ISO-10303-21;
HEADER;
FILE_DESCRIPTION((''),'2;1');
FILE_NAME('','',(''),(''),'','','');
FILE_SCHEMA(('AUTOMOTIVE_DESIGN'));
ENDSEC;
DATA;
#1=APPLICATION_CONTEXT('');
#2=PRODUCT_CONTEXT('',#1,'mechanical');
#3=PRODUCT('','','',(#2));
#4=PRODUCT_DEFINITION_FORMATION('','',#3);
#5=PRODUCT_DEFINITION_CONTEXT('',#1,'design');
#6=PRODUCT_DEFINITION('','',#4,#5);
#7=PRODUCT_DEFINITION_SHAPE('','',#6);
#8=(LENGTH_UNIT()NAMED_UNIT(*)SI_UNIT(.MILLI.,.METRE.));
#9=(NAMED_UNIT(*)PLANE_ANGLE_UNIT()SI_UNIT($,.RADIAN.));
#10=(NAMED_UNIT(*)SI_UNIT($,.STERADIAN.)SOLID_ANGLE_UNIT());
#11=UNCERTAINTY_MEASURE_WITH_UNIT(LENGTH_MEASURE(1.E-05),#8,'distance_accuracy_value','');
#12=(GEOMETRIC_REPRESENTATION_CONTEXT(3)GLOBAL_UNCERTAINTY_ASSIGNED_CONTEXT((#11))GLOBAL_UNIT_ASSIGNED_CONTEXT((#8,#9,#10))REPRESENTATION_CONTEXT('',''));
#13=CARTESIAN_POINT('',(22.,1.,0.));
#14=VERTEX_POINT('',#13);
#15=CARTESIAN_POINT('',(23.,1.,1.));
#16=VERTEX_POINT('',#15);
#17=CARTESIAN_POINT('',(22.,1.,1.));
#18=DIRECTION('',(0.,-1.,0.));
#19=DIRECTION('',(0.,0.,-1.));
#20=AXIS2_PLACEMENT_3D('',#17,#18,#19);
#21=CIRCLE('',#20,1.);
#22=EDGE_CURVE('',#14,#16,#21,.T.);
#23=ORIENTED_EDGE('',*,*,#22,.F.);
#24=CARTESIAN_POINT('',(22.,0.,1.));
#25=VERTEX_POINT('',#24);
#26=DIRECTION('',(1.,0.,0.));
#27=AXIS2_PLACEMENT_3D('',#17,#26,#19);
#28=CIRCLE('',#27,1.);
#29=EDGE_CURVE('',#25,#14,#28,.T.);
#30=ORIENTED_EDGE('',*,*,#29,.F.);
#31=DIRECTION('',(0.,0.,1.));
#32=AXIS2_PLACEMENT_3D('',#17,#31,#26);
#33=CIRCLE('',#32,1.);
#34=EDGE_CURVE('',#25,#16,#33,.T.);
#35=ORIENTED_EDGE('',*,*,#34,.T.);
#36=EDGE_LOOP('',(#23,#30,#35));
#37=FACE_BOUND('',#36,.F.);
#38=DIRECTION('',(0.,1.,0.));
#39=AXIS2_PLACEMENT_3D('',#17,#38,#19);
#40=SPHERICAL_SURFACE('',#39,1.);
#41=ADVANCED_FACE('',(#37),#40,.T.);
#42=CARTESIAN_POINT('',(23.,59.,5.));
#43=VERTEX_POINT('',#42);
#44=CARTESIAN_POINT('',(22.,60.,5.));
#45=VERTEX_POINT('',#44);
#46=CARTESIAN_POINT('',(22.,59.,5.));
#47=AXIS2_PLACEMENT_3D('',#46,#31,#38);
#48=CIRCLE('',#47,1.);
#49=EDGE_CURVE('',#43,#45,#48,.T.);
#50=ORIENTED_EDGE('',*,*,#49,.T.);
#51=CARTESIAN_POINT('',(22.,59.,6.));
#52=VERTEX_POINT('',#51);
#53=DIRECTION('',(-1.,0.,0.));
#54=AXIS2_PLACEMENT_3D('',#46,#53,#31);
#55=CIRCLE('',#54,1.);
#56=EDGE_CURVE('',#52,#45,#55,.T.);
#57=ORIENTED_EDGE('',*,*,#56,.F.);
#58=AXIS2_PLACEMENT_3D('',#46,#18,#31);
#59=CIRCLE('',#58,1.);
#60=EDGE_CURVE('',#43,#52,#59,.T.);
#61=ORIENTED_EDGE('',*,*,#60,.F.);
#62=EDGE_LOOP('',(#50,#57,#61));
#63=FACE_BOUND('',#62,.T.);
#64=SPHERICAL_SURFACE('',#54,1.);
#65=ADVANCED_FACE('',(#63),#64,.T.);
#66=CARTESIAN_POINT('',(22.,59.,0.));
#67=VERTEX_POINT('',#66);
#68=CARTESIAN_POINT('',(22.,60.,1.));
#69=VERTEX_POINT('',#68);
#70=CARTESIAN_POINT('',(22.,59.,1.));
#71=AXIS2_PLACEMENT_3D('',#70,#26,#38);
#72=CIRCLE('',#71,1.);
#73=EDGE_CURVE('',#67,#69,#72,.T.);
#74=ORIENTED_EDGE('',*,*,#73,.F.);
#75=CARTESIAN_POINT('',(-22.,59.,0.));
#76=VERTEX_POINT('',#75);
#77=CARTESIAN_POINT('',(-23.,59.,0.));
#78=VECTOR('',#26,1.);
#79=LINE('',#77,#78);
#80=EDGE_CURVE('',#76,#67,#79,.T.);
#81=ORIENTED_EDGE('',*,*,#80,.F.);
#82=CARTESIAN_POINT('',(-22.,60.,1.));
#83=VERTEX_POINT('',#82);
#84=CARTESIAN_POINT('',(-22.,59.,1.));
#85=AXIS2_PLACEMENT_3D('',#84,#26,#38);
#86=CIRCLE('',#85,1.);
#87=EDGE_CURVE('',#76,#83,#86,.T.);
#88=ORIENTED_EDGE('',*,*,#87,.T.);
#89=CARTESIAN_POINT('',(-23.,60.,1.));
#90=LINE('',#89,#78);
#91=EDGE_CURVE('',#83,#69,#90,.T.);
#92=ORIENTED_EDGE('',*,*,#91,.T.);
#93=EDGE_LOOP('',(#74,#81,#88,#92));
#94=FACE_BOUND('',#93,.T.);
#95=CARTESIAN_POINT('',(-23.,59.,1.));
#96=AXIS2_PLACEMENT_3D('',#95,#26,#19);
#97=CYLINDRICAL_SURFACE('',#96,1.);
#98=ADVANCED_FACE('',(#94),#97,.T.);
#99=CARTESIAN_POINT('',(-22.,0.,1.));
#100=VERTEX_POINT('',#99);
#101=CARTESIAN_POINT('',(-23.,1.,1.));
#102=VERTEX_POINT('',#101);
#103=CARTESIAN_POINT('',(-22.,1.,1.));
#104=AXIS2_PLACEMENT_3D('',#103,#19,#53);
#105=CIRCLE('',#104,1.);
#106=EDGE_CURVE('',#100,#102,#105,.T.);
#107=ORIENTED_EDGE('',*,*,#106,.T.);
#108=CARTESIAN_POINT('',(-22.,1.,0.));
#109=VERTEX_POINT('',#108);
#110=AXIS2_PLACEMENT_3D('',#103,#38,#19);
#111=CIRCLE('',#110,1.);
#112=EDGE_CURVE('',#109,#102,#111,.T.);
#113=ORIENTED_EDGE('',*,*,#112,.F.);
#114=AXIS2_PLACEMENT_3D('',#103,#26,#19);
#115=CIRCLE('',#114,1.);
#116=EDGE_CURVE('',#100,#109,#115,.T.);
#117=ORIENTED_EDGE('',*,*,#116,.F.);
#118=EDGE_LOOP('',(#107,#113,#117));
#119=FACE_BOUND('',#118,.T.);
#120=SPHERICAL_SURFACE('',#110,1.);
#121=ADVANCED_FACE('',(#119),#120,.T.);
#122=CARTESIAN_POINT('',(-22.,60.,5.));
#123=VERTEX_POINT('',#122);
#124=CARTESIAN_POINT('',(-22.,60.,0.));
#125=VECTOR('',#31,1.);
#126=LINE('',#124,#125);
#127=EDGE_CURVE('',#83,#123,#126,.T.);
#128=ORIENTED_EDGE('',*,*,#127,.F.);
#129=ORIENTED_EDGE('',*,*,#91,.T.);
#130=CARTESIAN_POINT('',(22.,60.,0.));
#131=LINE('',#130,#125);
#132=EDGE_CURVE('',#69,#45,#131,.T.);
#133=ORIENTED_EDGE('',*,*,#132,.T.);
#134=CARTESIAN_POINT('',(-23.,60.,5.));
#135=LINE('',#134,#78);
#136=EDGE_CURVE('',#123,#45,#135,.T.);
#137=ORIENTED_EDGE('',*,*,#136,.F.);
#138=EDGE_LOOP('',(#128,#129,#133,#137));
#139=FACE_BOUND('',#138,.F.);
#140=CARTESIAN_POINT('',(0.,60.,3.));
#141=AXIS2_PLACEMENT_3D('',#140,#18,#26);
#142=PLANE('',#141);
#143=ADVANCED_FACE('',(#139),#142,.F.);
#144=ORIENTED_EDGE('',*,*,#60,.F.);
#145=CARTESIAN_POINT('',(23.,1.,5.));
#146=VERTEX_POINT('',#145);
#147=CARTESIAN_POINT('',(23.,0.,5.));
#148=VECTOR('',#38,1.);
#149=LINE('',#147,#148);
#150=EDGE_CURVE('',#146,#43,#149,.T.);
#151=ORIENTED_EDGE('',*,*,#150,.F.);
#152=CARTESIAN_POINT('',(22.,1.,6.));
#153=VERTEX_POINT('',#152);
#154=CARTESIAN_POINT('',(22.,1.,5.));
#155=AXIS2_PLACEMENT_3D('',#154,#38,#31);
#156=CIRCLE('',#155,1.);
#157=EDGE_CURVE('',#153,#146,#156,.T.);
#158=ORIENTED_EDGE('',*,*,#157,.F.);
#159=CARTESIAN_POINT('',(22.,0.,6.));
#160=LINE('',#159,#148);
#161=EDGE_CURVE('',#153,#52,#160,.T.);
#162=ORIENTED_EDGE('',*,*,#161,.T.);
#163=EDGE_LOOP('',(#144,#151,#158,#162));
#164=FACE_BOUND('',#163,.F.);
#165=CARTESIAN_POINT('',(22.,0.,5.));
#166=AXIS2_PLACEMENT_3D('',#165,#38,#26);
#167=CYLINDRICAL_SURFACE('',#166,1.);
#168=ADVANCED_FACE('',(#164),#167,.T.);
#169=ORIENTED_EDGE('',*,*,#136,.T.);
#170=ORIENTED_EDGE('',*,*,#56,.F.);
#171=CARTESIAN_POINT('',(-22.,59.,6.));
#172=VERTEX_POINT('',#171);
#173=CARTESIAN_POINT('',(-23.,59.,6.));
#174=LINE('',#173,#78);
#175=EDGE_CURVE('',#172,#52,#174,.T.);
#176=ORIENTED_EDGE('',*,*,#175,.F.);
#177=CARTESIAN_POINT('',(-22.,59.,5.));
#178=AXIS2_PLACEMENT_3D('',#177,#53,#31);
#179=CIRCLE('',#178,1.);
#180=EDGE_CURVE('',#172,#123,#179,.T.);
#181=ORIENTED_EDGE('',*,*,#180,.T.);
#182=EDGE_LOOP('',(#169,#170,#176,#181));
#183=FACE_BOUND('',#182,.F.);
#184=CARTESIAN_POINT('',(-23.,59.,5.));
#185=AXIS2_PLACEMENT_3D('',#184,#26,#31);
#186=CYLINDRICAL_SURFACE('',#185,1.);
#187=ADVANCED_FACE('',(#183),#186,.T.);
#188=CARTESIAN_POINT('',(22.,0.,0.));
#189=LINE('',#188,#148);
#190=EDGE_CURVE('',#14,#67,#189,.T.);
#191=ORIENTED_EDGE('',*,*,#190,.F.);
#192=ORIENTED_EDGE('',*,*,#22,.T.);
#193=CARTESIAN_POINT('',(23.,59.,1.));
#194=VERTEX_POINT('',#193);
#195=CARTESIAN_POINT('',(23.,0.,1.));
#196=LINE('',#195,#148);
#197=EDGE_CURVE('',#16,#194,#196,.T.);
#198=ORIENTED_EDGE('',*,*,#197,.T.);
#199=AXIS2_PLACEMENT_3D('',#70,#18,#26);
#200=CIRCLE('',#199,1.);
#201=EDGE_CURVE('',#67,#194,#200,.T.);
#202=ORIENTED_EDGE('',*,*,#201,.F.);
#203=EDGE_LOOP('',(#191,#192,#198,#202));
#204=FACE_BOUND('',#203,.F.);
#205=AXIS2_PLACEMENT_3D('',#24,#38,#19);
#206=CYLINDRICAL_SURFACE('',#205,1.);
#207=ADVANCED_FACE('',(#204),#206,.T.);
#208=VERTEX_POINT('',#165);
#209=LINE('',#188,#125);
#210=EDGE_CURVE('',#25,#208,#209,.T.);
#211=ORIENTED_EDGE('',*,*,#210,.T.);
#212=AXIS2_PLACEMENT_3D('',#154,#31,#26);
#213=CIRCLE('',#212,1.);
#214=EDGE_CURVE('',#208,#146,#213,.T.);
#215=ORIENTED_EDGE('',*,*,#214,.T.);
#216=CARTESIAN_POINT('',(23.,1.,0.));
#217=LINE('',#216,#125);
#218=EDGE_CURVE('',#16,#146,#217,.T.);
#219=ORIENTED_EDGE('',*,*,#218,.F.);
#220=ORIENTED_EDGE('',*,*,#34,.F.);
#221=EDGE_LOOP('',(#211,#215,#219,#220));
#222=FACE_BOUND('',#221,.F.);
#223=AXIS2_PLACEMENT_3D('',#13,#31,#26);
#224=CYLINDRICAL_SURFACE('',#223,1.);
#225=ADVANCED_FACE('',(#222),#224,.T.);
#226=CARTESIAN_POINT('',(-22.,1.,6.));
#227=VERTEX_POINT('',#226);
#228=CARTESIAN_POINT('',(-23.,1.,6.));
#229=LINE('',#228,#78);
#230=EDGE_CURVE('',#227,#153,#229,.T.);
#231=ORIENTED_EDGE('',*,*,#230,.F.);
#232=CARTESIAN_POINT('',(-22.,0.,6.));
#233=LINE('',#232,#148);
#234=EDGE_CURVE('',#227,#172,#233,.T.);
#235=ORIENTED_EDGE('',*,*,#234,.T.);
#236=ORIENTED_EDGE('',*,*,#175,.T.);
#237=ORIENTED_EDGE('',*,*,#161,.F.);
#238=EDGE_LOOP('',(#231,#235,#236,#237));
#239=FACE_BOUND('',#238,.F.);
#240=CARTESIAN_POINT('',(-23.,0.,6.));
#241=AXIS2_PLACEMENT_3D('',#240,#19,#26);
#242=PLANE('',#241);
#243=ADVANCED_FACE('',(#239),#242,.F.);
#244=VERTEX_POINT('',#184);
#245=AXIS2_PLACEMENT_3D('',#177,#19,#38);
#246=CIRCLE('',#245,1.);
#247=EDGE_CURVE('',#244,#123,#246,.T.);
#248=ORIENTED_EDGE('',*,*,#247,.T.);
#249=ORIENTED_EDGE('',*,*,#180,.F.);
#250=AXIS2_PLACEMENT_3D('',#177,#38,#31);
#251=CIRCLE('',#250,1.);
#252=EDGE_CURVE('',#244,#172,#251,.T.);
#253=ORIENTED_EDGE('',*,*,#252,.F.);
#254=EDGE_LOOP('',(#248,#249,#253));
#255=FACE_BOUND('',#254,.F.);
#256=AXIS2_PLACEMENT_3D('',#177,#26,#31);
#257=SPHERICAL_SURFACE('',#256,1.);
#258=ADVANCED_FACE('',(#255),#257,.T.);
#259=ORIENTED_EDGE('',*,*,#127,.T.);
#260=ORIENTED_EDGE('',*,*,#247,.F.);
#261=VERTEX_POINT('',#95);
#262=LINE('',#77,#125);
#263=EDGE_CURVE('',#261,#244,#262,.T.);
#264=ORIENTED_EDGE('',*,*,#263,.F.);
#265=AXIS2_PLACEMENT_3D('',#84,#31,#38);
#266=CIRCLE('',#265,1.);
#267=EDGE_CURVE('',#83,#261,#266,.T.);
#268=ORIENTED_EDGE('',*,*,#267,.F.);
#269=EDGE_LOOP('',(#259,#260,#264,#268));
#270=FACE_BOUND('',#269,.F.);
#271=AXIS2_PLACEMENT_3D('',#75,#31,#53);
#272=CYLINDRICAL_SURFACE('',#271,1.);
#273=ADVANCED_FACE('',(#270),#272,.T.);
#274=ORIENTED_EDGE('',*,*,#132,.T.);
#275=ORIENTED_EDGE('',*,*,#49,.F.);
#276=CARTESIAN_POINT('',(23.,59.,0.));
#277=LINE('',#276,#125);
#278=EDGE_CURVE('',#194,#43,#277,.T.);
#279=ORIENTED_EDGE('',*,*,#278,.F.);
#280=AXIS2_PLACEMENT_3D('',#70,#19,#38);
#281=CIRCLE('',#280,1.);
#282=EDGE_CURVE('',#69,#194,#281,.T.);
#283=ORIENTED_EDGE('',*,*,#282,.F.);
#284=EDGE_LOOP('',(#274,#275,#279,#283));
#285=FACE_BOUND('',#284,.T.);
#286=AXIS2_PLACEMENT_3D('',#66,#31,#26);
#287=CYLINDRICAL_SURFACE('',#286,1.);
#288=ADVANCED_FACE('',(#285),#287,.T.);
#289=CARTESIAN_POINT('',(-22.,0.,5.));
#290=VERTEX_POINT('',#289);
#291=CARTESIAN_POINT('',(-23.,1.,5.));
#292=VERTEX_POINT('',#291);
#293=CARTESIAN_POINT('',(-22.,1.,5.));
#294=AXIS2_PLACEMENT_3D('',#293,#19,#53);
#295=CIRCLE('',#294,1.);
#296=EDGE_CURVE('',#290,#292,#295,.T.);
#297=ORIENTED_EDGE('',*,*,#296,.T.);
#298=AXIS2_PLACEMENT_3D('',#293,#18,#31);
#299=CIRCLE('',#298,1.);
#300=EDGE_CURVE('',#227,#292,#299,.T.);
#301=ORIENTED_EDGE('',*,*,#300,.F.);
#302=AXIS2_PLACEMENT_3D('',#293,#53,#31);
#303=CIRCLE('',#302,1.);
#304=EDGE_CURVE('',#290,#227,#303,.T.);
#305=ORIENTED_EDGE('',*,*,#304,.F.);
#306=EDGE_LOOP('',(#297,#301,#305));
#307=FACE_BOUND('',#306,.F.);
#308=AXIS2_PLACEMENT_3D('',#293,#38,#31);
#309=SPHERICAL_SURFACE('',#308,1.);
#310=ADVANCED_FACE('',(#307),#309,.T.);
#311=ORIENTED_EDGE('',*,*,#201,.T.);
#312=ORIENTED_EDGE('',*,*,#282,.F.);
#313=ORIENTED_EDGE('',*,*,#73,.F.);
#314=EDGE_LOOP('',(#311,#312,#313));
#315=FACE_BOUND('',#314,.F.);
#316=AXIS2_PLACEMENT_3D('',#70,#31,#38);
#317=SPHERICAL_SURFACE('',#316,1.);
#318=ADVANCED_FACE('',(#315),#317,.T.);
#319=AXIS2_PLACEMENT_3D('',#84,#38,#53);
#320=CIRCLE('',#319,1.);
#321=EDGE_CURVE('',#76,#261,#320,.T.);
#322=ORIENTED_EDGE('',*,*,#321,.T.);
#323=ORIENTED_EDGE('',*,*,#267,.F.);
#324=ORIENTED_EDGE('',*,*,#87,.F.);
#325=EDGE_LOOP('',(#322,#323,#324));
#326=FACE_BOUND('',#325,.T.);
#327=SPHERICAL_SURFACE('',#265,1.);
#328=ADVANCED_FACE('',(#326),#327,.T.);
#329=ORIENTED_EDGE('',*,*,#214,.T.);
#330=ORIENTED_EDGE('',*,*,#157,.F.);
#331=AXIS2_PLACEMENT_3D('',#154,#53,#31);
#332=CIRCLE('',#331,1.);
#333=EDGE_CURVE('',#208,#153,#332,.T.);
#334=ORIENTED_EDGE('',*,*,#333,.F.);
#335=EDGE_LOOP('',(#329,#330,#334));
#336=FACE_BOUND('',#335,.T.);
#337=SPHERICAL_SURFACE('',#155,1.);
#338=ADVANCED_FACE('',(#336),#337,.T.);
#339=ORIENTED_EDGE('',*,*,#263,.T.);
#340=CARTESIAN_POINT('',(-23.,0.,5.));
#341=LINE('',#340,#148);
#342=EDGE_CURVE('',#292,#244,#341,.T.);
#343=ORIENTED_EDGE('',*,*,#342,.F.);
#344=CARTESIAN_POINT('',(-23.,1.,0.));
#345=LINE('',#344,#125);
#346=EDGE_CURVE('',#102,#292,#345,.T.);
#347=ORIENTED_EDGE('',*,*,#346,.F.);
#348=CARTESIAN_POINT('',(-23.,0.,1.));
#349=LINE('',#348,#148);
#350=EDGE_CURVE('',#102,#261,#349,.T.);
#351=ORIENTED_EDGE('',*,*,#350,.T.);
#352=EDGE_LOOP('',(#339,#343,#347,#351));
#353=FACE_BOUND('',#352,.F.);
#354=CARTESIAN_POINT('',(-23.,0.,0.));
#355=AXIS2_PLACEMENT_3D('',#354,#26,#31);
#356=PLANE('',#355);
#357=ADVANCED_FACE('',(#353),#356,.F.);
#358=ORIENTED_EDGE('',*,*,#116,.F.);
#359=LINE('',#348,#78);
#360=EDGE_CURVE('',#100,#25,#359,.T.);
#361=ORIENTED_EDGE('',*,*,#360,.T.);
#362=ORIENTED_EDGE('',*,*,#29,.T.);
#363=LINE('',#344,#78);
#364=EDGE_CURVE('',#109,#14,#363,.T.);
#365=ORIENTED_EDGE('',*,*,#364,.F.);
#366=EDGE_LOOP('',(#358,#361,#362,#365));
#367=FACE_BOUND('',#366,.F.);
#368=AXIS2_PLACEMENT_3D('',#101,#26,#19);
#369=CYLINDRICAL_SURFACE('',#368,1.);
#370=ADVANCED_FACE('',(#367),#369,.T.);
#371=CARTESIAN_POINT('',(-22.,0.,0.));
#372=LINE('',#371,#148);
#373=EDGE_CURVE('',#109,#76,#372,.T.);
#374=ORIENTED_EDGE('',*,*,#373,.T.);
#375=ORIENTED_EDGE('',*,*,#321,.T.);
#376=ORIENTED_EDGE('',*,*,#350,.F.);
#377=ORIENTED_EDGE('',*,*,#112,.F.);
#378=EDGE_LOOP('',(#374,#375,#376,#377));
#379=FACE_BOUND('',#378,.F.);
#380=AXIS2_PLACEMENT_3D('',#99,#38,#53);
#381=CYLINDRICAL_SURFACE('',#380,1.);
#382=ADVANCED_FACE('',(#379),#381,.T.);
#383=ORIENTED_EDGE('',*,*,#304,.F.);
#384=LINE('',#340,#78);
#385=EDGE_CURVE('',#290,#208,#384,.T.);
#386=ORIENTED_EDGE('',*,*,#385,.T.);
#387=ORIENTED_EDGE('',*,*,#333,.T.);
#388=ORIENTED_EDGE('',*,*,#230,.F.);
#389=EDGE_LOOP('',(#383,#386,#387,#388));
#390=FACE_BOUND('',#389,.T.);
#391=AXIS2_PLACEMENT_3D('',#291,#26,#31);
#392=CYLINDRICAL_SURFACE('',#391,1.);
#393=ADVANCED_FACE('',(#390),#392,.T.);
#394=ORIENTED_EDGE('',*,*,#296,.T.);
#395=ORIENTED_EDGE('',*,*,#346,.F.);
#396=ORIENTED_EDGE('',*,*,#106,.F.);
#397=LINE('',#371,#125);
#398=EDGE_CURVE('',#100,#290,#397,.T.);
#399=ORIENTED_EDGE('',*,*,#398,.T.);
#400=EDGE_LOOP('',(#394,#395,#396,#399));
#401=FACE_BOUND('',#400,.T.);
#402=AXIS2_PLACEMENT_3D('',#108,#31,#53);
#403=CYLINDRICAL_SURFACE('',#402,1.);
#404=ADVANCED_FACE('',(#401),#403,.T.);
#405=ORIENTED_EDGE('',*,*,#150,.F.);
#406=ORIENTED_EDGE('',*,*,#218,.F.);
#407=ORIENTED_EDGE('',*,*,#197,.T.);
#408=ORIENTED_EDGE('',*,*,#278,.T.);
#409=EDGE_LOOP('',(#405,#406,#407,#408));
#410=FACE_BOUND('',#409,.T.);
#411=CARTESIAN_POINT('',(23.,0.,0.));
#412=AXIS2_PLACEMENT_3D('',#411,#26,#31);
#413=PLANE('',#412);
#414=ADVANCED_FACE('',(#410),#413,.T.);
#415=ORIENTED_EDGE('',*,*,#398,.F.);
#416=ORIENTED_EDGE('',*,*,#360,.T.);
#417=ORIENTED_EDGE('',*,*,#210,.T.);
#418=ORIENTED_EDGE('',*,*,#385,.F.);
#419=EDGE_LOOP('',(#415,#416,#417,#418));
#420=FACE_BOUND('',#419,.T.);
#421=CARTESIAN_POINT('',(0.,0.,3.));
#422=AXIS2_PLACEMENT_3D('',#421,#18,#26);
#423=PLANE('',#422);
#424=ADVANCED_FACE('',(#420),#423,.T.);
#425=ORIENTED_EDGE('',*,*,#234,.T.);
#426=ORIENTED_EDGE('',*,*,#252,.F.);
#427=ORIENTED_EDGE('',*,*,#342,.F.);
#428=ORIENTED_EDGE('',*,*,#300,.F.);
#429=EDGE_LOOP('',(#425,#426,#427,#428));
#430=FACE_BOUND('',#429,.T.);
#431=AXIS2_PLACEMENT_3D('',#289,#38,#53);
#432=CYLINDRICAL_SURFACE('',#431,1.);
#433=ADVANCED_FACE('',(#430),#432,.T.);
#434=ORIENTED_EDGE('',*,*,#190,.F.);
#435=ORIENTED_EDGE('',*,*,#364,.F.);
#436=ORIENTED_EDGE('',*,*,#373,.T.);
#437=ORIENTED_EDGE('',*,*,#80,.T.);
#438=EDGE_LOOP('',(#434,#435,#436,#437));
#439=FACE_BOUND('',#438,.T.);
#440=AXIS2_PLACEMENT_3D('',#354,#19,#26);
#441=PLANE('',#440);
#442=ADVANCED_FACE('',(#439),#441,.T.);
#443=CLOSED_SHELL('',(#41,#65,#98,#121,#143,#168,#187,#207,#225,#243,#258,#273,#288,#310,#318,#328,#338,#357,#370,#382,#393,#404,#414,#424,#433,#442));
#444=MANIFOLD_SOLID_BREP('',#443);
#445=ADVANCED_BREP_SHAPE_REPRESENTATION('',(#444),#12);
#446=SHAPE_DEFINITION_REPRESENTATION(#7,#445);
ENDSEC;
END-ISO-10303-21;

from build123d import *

# Parameters (mm, degrees)
F0_W     = 46
F0_H     = 6
F1_DEPTH = 60
F2_R     = 1


# Not quite as in the source:
# - a feature names something its author has since deleted; it is built from what else it names


with BuildPart() as f1:
    # F0 (on Front) → F1 (new body)
    with BuildSketch(Plane.XZ):
        with Locations((0, 3)):
            Rectangle(F0_W, F0_H)
    extrude(amount=-F1_DEPTH)

    # F2
    f2_edges = [f1.edges().sort_by_distance(p)[0] for p in [
        (0, 60, 6),
        (23, 30, 6),
        (-23, 30, 6),
        (0, 0, 6),
        (23, 60, 3),
        (-23, 60, 3),
        (0, 60, 0),
        (-23, 30, 0),
        (23, 30, 0),
        (0, 0, 0),
        (-23, 0, 3),
        (23, 0, 3),
    ]]
    fillet(f2_edges, radius=F2_R)


solid = f1.part
